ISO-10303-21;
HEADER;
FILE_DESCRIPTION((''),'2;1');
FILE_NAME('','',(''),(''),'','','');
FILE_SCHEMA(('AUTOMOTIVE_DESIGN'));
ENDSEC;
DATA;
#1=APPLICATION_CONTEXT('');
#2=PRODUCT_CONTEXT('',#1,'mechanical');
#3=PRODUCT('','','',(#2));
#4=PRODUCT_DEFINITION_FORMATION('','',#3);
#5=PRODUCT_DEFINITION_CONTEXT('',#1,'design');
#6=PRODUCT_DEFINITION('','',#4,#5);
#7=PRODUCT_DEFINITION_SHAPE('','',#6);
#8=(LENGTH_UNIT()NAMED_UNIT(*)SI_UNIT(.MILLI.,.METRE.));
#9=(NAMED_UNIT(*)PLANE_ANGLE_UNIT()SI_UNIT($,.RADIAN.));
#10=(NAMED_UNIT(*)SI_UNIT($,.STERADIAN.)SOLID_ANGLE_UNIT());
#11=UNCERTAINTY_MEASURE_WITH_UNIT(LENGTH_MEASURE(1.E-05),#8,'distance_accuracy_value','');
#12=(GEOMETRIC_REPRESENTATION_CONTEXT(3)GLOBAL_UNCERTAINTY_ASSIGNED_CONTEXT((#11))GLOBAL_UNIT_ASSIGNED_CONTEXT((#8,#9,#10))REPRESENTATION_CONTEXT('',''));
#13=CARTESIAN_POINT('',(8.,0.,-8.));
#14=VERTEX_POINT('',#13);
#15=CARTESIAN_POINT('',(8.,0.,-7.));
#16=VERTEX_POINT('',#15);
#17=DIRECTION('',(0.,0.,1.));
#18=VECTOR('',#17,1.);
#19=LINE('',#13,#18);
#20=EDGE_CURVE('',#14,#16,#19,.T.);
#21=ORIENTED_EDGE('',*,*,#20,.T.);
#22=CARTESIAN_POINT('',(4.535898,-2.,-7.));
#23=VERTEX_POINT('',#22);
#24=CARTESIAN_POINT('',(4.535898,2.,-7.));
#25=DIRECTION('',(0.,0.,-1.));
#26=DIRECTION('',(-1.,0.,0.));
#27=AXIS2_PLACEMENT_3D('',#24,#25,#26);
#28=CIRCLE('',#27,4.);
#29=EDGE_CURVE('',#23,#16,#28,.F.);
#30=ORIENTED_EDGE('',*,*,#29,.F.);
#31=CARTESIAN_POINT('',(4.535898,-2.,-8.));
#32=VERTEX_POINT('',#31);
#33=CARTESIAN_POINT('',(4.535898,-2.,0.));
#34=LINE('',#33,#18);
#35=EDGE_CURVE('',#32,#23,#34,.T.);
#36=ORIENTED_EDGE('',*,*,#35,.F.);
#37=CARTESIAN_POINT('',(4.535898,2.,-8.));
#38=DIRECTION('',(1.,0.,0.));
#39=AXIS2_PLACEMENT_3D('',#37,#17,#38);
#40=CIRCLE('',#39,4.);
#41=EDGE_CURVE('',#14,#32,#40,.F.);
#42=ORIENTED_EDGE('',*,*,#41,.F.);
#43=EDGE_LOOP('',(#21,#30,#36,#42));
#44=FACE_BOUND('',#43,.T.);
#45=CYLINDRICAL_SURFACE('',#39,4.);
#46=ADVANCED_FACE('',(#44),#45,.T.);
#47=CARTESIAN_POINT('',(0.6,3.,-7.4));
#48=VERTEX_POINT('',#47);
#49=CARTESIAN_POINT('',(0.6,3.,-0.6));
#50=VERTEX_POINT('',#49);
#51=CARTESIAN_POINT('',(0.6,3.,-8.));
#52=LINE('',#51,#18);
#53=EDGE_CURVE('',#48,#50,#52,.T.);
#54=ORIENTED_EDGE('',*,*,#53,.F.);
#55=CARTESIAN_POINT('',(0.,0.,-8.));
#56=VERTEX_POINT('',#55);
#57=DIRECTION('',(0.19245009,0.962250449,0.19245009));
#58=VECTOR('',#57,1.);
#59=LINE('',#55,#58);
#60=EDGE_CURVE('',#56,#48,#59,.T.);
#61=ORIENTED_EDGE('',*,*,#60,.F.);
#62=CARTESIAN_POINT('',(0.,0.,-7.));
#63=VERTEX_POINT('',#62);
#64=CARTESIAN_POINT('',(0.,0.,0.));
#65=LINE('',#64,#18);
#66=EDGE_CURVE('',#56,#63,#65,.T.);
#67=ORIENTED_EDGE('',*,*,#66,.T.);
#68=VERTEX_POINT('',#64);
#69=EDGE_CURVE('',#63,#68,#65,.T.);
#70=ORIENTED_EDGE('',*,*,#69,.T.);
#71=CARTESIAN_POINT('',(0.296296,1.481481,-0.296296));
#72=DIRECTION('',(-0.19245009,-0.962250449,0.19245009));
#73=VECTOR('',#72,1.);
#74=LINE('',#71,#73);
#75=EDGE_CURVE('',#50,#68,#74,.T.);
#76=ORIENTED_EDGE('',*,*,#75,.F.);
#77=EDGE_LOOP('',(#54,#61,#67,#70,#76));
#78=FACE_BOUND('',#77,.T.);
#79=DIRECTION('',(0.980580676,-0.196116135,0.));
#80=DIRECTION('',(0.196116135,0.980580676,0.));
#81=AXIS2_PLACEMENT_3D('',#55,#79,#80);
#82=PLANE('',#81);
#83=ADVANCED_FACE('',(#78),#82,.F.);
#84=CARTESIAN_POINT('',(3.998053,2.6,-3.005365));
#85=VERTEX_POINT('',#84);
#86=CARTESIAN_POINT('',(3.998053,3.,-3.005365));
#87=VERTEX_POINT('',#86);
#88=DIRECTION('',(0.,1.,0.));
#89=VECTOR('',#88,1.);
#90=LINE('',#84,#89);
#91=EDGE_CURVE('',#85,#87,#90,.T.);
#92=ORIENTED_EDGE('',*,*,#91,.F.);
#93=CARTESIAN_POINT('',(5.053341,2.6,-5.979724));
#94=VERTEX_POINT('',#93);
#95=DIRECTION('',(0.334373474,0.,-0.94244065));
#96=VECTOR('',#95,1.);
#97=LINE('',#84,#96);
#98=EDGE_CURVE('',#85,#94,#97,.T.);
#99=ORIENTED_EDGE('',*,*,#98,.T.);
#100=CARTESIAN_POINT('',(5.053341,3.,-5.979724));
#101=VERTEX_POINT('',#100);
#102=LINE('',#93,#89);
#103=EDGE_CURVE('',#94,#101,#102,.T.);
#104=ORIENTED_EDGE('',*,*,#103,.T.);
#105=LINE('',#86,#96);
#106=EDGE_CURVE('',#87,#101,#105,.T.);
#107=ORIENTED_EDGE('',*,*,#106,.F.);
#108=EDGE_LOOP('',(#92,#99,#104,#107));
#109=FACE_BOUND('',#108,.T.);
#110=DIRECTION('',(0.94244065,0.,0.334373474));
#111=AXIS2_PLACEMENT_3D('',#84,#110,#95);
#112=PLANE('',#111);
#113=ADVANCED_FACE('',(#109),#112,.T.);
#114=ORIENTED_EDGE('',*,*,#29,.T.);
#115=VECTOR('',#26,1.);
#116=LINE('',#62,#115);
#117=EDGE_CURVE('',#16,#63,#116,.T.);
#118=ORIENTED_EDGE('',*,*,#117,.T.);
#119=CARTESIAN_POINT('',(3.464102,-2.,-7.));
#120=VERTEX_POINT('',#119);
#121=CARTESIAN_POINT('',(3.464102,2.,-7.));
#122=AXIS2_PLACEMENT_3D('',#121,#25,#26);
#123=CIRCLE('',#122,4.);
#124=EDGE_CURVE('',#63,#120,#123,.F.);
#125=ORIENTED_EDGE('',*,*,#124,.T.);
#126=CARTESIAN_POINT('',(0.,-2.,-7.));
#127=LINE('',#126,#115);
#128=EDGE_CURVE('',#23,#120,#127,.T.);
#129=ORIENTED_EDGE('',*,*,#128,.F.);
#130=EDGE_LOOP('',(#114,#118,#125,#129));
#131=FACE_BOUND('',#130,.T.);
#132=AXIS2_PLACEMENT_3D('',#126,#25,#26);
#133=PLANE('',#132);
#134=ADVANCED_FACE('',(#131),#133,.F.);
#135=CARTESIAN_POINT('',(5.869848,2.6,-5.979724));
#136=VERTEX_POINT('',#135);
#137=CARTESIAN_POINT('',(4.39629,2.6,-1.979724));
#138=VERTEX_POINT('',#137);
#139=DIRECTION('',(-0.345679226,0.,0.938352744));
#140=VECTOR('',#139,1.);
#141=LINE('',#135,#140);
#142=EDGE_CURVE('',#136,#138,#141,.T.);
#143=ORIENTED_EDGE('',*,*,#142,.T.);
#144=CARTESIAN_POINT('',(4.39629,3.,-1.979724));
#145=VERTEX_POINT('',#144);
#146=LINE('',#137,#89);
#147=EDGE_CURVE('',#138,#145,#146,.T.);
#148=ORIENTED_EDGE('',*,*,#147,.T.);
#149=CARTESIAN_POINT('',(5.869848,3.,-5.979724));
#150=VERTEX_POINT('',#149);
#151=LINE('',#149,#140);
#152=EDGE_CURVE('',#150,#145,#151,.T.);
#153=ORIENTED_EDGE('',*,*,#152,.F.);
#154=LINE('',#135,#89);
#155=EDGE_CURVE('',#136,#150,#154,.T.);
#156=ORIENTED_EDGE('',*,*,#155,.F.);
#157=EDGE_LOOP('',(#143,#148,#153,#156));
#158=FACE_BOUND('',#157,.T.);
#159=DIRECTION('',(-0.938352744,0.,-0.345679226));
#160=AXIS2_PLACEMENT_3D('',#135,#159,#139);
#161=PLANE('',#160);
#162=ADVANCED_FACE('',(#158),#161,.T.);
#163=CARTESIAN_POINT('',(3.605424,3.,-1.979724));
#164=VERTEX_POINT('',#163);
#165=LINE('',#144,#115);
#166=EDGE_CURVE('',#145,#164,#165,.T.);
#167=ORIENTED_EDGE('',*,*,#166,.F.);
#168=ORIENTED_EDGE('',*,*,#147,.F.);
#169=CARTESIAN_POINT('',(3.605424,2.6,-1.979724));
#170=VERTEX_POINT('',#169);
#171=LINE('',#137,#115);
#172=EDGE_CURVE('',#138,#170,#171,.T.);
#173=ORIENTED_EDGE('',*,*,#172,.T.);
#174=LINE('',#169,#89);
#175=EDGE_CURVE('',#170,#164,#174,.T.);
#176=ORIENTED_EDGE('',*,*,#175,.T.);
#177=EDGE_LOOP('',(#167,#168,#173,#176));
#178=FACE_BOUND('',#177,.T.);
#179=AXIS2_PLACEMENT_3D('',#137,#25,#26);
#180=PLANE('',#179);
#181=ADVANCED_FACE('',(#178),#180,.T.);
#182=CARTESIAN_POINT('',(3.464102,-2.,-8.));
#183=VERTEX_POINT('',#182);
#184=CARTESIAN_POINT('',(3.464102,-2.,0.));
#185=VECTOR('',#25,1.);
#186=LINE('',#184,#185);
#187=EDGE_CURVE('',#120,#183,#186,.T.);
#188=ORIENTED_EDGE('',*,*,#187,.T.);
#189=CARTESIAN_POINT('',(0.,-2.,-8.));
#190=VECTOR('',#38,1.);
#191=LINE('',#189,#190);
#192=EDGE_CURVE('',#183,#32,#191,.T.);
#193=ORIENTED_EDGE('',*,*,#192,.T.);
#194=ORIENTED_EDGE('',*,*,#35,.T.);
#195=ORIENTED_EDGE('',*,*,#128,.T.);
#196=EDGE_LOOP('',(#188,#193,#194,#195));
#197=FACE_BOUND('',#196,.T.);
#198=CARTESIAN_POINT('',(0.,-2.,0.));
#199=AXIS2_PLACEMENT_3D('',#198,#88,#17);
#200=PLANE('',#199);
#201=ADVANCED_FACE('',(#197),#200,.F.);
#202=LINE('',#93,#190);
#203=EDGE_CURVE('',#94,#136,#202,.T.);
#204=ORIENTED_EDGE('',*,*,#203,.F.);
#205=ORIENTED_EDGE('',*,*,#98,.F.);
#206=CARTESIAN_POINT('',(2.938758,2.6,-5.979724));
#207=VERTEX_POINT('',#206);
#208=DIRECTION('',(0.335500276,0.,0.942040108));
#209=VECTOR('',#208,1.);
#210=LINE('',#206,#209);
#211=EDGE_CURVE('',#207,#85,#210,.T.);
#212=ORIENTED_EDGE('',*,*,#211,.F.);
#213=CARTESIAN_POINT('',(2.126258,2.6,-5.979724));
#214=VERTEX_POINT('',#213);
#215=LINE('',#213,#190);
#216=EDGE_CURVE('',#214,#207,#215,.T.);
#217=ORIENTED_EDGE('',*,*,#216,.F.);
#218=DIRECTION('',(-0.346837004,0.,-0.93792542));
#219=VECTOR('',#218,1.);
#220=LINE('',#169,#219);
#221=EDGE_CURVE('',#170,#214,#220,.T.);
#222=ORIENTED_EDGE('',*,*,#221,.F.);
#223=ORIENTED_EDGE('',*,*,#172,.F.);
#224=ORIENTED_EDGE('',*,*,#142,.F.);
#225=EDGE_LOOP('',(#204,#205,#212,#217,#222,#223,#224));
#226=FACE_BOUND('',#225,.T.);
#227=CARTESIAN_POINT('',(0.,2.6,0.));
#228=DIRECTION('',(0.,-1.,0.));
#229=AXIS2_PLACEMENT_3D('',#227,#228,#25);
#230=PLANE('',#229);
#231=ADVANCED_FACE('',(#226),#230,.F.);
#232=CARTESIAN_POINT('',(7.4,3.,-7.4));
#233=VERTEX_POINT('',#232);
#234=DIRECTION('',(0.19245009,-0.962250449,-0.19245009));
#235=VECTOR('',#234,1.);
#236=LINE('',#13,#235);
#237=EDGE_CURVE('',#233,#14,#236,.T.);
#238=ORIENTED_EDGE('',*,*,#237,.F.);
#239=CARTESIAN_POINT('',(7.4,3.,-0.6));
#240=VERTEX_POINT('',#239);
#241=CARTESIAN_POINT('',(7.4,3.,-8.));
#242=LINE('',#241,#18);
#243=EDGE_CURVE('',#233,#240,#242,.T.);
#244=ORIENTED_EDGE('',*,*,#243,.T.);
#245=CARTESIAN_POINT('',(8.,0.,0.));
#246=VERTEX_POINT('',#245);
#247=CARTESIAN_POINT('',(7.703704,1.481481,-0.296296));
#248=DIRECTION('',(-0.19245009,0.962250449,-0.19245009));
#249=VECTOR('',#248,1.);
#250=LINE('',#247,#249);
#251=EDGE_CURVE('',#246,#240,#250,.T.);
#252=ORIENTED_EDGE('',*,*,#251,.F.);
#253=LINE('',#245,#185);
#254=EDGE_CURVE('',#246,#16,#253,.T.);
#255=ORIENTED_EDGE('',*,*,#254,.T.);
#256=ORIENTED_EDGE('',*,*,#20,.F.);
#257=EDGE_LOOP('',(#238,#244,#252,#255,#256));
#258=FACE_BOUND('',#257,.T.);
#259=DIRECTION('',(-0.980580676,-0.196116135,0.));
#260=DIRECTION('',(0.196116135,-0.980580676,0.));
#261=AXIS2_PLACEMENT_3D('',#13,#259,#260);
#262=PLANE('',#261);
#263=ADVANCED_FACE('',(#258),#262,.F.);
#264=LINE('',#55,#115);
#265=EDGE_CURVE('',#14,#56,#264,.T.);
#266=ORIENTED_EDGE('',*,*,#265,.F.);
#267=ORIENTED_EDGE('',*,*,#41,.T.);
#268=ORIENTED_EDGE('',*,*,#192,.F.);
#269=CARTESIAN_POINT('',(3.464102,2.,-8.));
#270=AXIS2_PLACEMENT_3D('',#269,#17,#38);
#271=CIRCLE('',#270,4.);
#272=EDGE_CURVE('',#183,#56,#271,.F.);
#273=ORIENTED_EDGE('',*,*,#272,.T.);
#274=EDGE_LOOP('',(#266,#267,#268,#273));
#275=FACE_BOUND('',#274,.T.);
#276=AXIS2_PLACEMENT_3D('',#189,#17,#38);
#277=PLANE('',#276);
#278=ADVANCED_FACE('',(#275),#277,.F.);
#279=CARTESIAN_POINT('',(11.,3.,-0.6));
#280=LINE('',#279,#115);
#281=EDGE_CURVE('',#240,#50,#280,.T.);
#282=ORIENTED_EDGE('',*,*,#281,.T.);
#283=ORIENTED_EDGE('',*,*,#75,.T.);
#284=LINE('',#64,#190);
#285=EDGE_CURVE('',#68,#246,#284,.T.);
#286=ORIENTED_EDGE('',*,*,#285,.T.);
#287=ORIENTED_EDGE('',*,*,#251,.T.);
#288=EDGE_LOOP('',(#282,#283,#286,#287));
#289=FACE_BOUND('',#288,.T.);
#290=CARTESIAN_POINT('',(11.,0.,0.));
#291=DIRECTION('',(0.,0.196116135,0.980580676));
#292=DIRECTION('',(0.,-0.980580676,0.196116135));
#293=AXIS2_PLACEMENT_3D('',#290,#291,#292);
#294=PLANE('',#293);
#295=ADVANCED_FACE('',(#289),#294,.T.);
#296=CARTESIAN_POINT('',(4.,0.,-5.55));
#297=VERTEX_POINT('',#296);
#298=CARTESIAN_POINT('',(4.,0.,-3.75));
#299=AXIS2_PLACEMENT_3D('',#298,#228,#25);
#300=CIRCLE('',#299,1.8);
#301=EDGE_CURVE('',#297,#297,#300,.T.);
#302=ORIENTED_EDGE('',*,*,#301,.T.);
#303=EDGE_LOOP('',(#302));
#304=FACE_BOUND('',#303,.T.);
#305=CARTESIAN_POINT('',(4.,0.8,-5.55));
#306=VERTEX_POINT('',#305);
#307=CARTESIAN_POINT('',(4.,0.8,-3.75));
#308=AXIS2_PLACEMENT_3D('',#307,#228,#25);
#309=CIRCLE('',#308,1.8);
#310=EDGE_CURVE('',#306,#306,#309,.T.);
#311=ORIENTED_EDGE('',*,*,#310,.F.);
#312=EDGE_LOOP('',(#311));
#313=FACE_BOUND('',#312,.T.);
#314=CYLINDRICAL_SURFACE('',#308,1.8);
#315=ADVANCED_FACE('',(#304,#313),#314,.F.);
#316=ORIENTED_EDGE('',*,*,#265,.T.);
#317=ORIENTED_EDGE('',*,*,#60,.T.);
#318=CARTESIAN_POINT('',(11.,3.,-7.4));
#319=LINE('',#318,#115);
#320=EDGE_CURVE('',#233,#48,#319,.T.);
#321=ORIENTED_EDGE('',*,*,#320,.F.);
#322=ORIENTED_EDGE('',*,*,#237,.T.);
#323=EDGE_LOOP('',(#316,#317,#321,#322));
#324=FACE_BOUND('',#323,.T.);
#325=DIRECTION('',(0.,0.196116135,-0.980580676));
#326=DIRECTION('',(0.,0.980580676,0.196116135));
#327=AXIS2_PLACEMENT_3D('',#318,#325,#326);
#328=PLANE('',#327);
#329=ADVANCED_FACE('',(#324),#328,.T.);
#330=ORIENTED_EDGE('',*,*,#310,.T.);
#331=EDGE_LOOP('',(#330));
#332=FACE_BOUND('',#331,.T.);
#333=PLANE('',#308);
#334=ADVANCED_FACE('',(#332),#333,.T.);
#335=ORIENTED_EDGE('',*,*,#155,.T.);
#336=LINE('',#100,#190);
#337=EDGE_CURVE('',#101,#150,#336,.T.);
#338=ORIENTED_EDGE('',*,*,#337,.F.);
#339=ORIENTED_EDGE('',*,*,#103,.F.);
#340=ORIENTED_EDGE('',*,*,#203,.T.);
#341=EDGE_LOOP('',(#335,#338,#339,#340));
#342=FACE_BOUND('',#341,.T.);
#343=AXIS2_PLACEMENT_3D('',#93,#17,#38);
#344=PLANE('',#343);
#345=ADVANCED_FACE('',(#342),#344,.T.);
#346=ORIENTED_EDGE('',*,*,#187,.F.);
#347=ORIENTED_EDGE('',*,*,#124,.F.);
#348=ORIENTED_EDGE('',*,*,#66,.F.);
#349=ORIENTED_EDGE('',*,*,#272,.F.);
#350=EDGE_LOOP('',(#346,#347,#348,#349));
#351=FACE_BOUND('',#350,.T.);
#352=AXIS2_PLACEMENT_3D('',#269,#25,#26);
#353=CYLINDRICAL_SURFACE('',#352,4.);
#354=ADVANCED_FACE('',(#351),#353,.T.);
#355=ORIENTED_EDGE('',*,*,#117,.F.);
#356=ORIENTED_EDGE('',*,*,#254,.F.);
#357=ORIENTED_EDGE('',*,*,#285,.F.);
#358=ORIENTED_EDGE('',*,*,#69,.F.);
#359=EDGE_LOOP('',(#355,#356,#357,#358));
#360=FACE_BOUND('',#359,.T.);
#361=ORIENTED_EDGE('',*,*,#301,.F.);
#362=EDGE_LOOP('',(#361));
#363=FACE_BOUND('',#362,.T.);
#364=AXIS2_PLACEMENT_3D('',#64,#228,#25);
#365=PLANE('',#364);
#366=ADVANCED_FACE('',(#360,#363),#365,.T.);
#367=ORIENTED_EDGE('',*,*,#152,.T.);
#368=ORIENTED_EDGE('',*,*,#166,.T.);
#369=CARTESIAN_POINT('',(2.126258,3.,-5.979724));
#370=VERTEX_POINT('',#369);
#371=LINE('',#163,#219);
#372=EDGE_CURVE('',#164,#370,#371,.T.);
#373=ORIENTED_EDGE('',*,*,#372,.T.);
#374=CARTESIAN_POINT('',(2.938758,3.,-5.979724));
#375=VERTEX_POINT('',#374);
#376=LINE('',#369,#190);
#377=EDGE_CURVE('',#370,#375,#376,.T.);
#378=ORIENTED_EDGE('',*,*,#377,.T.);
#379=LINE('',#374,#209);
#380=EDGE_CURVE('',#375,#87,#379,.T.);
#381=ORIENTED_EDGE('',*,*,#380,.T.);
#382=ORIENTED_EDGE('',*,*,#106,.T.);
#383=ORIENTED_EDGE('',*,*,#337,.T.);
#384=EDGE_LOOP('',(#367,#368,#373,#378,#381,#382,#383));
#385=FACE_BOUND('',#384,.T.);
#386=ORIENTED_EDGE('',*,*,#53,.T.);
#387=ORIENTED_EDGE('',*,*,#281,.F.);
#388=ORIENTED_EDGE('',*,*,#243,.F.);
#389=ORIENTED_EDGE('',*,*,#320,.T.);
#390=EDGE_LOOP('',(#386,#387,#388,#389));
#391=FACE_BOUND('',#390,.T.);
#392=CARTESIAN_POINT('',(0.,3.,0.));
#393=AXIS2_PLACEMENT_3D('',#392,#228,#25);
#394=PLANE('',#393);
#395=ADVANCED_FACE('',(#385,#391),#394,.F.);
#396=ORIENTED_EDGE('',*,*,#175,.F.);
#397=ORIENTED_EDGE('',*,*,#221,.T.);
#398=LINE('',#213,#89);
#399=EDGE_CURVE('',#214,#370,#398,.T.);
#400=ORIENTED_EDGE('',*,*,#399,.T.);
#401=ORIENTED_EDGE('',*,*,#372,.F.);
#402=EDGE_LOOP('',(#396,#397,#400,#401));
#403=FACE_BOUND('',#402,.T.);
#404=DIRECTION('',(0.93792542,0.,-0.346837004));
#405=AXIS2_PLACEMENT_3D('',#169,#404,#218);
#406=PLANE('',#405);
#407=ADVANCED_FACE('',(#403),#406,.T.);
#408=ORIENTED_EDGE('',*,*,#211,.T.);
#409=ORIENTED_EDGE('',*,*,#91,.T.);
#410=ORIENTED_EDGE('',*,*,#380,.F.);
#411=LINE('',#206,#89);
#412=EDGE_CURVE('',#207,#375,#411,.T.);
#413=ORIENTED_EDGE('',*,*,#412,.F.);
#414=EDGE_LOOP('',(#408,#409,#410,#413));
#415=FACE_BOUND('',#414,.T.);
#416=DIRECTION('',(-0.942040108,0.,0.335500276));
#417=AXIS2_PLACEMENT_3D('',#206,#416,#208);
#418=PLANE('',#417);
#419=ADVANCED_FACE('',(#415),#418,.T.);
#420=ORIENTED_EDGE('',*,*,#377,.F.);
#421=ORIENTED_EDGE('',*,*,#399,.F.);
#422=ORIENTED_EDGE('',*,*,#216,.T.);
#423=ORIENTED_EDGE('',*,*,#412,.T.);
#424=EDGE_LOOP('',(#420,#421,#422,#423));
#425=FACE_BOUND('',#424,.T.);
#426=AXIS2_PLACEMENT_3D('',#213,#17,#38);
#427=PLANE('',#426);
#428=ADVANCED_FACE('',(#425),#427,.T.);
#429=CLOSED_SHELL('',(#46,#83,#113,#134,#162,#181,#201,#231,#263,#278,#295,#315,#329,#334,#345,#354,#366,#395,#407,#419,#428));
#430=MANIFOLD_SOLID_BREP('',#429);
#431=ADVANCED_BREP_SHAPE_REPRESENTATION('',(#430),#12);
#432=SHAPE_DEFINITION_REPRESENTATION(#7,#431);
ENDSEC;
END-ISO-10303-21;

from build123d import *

# Parameters (mm, degrees)
SKETCH1_W               = 8
SKETCH1_H               = 8
BOSS_EXTRUDE1_DEPTH     = 3
CUT_EXTRUDE1_DEPTH      = 12.704699911
CUT_EXTRUDE1_DEPTH_BACK = 12.704699911
CUT_EXTRUDE2_DEPTH      = 11
SKETCH4_R               = 1.8
CUT_EXTRUDE3_DEPTH      = 0.8
SKETCH5_W               = 8
SKETCH5_H               = 1
BOSS_EXTRUDE2_DEPTH     = 2
FILLET1_R               = 4
CUT_EXTRUDE4_DEPTH      = 0.4


with BuildPart() as part:
    # Sketch1 → Boss-Extrude1 (new body)
    with BuildSketch(Plane(origin=(0, 0, 0), x_dir=(1, 0, 0), z_dir=(0, 1, 0))):
        with Locations((4, 4)):
            Rectangle(SKETCH1_W, SKETCH1_H)
    extrude(amount=BOSS_EXTRUDE1_DEPTH)

    # Sketch2 → Cut-Extrude1 (cut, two sides: drawn at the far end of the back side and taken through both)
    with BuildSketch(Plane.XY.offset(-CUT_EXTRUDE1_DEPTH_BACK)):
        Polygon((0, 0), (0.6, 3), (0, 3), align=None)
        Polygon((8, 0), (7.4, 3), (8, 3), align=None)
    extrude(amount=CUT_EXTRUDE1_DEPTH + CUT_EXTRUDE1_DEPTH_BACK, mode=Mode.SUBTRACT)

    # Sketch3 → Cut-Extrude2 (cut)
    with BuildSketch(Plane(origin=(0, 0, 0), x_dir=(0, 0, -1), z_dir=(1, 0, 0))):
        Polygon((0, 0), (0.6, 3), (0, 3), align=None)
        Polygon((8, 3), (7.4, 3), (8, 0), align=None)
    extrude(amount=CUT_EXTRUDE2_DEPTH, mode=Mode.SUBTRACT)

    # Sketch4 → Cut-Extrude3 (cut)
    with BuildSketch(Plane.XZ):
        with Locations(Location((4, -3.75, 0), (0, 0, 270))):
            Circle(SKETCH4_R)
    extrude(amount=-CUT_EXTRUDE3_DEPTH, mode=Mode.SUBTRACT)

    # Sketch5 → Boss-Extrude2 (add)
    with BuildSketch(Plane.XZ):
        with Locations((4, -7.5)):
            Rectangle(SKETCH5_W, SKETCH5_H)
    extrude(amount=BOSS_EXTRUDE2_DEPTH)

    # Fillet1
    # the kernel refuses this fillet: 4 mm, written as the material it takes off along each edge
    with BuildSketch(Plane(origin=(8, -2, -16.660254038), x_dir=(0, 1, 0), z_dir=(0, 0, 1)), Plane(origin=(0, -2, 1.660254038), x_dir=(0, 1, 0), z_dir=(0, 0, -1))) as fillet1_piece_1:
        with BuildLine():
            CenterArc((4, 3.464101615), FILLET1_R, 180, 60)
            Line((0, 3.464101615), (-0.08, 3.464101615))
            Line((-0.08, 3.464101615), (-0.08, 0))
            Line((-0.08, 0), (0, -0.08))
            ThreePointArc((0, -0.08), (1, -0.08), (1.96, -0.069282032))
            Line((1.96, -0.069282032), (2, 0))
        make_face()
    extrude(amount=18.320508076, mode=Mode.SUBTRACT)

    # Sketch6 → Cut-Extrude4 (cut)
    with BuildSketch(Plane(origin=(0, 3, 0), x_dir=(1, 0, 0), z_dir=(0, 1, 0))):
        Polygon((3.605424489, 1.979723732), (2.126257822, 5.979723732), (2.938757822, 5.979723732), (3.998052694, 3.005364758), (5.053341155, 5.979723732), (5.869847566, 5.979723732), (4.396289873, 1.979723732), align=None)
    extrude(amount=-CUT_EXTRUDE4_DEPTH, mode=Mode.SUBTRACT)


solid = part.part
